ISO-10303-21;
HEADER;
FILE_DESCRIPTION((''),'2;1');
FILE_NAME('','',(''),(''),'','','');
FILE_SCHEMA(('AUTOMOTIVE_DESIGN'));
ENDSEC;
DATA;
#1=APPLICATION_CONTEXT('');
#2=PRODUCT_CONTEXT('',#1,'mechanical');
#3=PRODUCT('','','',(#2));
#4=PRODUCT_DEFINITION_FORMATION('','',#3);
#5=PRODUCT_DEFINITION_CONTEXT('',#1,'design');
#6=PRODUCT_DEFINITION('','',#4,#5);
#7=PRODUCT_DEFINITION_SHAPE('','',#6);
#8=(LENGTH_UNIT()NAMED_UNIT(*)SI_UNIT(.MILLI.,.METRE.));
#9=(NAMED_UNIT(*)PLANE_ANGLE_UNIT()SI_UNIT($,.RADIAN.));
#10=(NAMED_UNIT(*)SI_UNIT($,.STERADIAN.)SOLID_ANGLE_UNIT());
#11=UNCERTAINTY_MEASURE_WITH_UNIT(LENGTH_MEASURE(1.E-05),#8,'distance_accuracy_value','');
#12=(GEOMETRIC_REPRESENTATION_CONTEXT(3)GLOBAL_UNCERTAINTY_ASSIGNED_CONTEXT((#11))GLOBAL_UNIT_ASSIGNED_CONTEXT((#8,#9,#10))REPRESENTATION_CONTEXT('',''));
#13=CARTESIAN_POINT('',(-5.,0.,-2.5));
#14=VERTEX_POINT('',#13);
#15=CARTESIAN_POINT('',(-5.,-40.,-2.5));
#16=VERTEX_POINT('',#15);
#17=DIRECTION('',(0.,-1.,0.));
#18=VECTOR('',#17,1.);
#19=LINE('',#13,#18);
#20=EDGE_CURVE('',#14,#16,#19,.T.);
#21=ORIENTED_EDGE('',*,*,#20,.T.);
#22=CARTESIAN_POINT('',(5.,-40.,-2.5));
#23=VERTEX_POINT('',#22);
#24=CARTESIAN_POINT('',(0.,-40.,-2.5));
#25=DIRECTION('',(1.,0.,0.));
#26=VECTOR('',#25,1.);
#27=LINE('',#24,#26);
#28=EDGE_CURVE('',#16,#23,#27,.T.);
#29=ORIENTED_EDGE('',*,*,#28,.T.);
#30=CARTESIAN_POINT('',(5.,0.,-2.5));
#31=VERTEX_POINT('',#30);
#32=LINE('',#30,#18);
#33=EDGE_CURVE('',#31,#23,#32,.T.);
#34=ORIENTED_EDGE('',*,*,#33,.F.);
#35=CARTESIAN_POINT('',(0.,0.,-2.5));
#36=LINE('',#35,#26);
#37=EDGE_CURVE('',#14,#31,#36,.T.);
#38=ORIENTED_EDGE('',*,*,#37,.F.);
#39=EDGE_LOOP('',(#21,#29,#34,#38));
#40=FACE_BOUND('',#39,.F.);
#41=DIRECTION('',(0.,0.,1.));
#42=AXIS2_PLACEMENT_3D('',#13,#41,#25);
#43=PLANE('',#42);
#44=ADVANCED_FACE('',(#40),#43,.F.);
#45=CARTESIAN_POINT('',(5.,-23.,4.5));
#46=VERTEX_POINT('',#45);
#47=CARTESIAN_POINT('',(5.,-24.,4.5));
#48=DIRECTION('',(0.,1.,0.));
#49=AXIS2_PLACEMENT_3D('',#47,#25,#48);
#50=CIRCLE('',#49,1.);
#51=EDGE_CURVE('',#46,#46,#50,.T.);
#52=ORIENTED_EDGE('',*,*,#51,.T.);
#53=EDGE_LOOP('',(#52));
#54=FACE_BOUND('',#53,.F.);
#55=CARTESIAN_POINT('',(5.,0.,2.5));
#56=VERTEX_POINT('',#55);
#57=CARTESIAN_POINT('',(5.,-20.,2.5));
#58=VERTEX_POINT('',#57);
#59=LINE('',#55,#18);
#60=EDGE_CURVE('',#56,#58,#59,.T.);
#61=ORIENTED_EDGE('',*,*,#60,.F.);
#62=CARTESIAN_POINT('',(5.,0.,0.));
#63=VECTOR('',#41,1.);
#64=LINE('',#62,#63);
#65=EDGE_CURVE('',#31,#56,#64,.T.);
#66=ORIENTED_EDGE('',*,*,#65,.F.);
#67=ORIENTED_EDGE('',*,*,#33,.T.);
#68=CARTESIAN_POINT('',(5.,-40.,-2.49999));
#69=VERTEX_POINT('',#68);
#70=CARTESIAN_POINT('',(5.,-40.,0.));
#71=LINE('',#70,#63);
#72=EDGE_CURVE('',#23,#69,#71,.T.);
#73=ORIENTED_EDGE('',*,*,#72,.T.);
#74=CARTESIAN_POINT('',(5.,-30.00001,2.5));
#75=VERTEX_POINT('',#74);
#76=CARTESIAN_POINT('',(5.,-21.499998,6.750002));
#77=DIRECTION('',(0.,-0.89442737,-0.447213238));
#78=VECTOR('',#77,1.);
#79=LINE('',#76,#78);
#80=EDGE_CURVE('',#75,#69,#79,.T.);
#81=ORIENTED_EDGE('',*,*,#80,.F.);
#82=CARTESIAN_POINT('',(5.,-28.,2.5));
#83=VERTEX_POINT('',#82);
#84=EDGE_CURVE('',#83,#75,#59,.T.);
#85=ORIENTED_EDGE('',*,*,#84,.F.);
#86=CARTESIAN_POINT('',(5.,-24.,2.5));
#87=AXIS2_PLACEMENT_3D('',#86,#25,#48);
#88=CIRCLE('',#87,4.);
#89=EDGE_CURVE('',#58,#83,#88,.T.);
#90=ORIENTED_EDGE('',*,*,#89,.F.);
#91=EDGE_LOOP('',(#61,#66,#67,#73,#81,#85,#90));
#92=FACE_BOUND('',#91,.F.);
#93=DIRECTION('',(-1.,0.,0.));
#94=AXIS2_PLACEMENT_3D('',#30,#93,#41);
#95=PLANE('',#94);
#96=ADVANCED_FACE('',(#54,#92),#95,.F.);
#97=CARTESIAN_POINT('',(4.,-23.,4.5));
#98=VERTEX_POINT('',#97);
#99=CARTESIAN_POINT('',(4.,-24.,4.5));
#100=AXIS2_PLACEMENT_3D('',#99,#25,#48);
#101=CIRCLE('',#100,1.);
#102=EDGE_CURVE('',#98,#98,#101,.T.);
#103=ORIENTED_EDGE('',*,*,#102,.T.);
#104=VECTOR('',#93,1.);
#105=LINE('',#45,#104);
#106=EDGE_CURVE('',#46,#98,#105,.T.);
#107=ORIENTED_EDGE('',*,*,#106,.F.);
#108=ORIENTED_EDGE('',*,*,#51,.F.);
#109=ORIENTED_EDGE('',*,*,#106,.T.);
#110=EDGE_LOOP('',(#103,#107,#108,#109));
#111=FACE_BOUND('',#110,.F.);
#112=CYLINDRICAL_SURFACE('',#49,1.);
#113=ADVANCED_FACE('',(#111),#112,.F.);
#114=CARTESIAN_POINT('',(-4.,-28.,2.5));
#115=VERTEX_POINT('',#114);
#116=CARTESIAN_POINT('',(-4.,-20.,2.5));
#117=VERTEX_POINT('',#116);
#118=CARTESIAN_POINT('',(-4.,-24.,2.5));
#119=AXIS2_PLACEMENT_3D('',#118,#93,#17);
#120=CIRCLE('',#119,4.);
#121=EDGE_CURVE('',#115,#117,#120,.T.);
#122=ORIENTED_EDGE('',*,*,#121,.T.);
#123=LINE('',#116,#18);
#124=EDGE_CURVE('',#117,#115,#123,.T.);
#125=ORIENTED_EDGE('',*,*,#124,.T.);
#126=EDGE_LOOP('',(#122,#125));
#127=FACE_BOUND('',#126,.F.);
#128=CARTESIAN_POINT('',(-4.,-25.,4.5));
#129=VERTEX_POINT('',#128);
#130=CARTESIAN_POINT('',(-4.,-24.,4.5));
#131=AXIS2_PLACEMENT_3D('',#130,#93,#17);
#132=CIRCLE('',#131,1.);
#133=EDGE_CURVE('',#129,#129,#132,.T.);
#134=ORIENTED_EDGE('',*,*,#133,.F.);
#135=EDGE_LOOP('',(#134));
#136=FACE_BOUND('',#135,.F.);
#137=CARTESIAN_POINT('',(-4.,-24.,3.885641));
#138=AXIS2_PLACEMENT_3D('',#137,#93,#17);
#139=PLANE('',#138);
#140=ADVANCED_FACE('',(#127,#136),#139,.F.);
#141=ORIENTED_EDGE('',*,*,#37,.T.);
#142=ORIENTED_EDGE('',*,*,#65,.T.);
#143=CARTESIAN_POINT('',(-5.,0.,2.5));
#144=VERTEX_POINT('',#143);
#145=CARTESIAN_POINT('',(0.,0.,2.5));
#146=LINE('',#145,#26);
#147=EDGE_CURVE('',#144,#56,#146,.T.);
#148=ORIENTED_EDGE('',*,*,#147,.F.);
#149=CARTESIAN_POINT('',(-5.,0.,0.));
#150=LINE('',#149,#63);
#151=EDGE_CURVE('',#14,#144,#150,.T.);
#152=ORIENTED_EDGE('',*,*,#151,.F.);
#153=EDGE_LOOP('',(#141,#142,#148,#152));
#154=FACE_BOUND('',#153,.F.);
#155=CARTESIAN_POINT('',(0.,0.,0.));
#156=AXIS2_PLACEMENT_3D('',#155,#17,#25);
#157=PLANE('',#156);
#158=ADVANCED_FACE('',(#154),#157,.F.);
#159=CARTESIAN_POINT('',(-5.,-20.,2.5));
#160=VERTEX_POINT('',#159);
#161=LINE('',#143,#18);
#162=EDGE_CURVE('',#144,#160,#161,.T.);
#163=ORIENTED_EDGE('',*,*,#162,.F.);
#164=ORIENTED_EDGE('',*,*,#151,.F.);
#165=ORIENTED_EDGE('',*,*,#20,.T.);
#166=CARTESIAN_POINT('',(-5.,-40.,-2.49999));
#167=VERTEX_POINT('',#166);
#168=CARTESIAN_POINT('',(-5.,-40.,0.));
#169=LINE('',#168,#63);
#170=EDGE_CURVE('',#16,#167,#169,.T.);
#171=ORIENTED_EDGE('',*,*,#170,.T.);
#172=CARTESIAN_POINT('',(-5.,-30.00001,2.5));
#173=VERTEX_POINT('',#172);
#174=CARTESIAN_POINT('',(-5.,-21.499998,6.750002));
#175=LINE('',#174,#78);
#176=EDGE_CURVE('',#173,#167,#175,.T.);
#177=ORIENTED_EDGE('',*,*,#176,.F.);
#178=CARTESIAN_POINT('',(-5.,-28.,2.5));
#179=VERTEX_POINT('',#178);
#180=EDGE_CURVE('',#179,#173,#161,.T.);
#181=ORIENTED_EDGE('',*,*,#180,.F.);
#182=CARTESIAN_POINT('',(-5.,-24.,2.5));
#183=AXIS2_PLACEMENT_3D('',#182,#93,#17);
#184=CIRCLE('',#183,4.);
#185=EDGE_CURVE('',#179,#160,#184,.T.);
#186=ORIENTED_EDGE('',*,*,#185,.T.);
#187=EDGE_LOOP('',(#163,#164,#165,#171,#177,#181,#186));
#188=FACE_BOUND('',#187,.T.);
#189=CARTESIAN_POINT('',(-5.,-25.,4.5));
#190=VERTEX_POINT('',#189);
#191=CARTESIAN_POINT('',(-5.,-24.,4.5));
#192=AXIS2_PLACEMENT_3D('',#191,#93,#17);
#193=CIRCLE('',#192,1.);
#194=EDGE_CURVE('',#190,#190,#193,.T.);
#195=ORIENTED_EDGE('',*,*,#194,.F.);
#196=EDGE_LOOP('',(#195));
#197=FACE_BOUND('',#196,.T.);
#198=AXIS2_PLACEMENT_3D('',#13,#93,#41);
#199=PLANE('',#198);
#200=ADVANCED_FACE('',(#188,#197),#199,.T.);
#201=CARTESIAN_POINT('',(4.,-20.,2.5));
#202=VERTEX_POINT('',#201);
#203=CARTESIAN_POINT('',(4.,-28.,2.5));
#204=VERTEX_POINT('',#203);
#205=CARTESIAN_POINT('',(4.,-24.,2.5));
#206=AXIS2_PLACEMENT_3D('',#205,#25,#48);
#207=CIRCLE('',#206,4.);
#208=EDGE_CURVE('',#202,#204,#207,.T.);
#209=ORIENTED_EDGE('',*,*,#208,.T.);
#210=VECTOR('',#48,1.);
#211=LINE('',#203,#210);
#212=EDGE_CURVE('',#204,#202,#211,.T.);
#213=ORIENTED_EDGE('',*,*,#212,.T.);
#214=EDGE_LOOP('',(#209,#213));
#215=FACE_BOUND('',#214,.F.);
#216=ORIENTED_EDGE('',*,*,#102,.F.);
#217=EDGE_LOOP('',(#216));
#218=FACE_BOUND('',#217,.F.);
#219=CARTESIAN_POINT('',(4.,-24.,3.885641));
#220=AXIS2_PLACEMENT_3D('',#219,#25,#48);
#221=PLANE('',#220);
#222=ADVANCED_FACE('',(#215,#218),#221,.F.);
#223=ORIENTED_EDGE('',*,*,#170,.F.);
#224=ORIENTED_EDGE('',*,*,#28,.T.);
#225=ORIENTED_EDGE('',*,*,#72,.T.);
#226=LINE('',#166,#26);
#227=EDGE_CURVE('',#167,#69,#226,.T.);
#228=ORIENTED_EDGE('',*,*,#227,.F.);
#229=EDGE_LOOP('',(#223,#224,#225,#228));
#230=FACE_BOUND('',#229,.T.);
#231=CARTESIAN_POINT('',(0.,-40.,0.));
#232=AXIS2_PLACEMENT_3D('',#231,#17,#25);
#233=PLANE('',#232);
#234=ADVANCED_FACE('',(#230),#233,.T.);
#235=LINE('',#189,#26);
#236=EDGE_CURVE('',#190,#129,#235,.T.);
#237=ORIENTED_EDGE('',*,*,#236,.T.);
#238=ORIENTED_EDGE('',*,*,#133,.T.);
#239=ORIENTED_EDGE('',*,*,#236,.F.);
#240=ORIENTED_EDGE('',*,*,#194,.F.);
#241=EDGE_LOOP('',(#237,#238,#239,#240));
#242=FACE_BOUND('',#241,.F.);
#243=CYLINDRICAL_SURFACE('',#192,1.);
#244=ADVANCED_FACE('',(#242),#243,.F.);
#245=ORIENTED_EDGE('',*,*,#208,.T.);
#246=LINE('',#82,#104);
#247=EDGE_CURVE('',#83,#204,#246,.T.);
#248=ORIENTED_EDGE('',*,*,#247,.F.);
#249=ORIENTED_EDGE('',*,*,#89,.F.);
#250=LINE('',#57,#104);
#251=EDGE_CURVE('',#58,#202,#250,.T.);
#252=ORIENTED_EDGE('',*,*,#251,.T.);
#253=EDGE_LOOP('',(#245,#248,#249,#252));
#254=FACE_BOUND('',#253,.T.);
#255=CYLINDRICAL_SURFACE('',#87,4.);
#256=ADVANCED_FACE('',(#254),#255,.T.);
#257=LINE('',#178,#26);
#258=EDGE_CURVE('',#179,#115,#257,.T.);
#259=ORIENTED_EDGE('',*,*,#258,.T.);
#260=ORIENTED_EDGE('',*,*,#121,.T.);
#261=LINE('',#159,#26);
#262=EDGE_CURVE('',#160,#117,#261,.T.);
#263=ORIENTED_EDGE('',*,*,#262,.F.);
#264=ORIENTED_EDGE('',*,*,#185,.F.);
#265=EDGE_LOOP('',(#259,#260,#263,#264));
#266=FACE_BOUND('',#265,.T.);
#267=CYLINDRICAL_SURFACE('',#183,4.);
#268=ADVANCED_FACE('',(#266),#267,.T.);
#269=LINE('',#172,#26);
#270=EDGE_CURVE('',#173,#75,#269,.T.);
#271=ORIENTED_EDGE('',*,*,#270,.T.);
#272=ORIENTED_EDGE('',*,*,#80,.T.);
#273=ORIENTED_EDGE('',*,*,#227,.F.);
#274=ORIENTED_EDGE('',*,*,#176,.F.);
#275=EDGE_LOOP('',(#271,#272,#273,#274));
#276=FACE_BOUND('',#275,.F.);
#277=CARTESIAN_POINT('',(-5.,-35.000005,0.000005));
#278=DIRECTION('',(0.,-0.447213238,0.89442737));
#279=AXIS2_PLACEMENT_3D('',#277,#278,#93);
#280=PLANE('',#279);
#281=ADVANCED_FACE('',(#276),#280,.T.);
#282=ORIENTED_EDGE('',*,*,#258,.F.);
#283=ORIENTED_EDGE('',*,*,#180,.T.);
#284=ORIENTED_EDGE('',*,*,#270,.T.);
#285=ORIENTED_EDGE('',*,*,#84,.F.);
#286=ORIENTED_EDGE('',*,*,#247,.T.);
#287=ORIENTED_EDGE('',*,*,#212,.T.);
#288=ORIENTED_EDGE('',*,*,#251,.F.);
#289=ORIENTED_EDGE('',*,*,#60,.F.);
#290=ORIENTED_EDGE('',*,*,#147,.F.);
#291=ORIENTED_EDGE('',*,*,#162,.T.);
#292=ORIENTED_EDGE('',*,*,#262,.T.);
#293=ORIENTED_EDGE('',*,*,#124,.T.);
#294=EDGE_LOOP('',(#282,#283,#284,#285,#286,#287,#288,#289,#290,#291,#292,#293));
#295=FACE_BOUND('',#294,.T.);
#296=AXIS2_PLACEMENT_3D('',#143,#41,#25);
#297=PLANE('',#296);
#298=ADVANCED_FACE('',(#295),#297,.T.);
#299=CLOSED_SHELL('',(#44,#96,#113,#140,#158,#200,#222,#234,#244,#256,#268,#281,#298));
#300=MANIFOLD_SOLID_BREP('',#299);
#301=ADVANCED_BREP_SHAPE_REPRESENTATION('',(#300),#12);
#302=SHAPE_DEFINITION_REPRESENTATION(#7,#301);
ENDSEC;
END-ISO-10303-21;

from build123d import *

# Parameters (mm, degrees)
F0_W     = 10
F0_H     = 5
F1_DEPTH = 40
F2_R     = 1
F3_DEPTH = 1
F4_R     = 1
F5_DEPTH = 1
F6_SIZE2 = 4.99999
F6_SIZE  = 9.99999


# Not quite as in the source:
# - a fillet or chamfer is up to 0.001 mm smaller than in the source, because OpenCascade refuses the exact size


with BuildPart() as f1:
    # F0 (on Front) → F1 (new body)
    with BuildSketch(Plane.XZ):
        Rectangle(F0_W, F0_H)
    extrude(amount=F1_DEPTH)

    # F2 (on face) → F3 (join)
    with BuildSketch(Plane.YZ.offset(5)):
        with BuildLine():
            Line((-24, 2.5), (-20, 2.5))
            ThreePointArc((-20, 2.5), (-24, 6.5), (-28, 2.5))
            Line((-28, 2.5), (-24, 2.5))
        make_face()
        with Locations((-24, 4.5)):
            Circle(F2_R, mode=Mode.SUBTRACT)
    extrude(amount=-F3_DEPTH)

    # F4 (on face) → F5 (join)
    with BuildSketch(Plane(origin=(-5, 0, 0), x_dir=(0, -1, 0), z_dir=(-1, 0, 0))):
        with BuildLine():
            ThreePointArc((28, 2.5), (24, 6.5), (20, 2.5))
            Line((20, 2.5), (24, 2.5))
            Line((24, 2.5), (28, 2.5))
        make_face()
        with Locations((24, 4.5)):
            Circle(F4_R, mode=Mode.SUBTRACT)
    extrude(amount=-F5_DEPTH)

    # F6 (size 10 and 5 in the source; OpenCascade refuses exactly that, so slightly less here)
    f6_edges = [f1.edges().sort_by_distance(p)[0] for p in [
        (0, -40, 2.5),
    ]]
    f6_side = f1.faces().sort_by_distance((0, -19.833333, 2.5))[0]
    chamfer(f6_edges, length=F6_SIZE, length2=F6_SIZE2, reference=f6_side)


solid = f1.part
